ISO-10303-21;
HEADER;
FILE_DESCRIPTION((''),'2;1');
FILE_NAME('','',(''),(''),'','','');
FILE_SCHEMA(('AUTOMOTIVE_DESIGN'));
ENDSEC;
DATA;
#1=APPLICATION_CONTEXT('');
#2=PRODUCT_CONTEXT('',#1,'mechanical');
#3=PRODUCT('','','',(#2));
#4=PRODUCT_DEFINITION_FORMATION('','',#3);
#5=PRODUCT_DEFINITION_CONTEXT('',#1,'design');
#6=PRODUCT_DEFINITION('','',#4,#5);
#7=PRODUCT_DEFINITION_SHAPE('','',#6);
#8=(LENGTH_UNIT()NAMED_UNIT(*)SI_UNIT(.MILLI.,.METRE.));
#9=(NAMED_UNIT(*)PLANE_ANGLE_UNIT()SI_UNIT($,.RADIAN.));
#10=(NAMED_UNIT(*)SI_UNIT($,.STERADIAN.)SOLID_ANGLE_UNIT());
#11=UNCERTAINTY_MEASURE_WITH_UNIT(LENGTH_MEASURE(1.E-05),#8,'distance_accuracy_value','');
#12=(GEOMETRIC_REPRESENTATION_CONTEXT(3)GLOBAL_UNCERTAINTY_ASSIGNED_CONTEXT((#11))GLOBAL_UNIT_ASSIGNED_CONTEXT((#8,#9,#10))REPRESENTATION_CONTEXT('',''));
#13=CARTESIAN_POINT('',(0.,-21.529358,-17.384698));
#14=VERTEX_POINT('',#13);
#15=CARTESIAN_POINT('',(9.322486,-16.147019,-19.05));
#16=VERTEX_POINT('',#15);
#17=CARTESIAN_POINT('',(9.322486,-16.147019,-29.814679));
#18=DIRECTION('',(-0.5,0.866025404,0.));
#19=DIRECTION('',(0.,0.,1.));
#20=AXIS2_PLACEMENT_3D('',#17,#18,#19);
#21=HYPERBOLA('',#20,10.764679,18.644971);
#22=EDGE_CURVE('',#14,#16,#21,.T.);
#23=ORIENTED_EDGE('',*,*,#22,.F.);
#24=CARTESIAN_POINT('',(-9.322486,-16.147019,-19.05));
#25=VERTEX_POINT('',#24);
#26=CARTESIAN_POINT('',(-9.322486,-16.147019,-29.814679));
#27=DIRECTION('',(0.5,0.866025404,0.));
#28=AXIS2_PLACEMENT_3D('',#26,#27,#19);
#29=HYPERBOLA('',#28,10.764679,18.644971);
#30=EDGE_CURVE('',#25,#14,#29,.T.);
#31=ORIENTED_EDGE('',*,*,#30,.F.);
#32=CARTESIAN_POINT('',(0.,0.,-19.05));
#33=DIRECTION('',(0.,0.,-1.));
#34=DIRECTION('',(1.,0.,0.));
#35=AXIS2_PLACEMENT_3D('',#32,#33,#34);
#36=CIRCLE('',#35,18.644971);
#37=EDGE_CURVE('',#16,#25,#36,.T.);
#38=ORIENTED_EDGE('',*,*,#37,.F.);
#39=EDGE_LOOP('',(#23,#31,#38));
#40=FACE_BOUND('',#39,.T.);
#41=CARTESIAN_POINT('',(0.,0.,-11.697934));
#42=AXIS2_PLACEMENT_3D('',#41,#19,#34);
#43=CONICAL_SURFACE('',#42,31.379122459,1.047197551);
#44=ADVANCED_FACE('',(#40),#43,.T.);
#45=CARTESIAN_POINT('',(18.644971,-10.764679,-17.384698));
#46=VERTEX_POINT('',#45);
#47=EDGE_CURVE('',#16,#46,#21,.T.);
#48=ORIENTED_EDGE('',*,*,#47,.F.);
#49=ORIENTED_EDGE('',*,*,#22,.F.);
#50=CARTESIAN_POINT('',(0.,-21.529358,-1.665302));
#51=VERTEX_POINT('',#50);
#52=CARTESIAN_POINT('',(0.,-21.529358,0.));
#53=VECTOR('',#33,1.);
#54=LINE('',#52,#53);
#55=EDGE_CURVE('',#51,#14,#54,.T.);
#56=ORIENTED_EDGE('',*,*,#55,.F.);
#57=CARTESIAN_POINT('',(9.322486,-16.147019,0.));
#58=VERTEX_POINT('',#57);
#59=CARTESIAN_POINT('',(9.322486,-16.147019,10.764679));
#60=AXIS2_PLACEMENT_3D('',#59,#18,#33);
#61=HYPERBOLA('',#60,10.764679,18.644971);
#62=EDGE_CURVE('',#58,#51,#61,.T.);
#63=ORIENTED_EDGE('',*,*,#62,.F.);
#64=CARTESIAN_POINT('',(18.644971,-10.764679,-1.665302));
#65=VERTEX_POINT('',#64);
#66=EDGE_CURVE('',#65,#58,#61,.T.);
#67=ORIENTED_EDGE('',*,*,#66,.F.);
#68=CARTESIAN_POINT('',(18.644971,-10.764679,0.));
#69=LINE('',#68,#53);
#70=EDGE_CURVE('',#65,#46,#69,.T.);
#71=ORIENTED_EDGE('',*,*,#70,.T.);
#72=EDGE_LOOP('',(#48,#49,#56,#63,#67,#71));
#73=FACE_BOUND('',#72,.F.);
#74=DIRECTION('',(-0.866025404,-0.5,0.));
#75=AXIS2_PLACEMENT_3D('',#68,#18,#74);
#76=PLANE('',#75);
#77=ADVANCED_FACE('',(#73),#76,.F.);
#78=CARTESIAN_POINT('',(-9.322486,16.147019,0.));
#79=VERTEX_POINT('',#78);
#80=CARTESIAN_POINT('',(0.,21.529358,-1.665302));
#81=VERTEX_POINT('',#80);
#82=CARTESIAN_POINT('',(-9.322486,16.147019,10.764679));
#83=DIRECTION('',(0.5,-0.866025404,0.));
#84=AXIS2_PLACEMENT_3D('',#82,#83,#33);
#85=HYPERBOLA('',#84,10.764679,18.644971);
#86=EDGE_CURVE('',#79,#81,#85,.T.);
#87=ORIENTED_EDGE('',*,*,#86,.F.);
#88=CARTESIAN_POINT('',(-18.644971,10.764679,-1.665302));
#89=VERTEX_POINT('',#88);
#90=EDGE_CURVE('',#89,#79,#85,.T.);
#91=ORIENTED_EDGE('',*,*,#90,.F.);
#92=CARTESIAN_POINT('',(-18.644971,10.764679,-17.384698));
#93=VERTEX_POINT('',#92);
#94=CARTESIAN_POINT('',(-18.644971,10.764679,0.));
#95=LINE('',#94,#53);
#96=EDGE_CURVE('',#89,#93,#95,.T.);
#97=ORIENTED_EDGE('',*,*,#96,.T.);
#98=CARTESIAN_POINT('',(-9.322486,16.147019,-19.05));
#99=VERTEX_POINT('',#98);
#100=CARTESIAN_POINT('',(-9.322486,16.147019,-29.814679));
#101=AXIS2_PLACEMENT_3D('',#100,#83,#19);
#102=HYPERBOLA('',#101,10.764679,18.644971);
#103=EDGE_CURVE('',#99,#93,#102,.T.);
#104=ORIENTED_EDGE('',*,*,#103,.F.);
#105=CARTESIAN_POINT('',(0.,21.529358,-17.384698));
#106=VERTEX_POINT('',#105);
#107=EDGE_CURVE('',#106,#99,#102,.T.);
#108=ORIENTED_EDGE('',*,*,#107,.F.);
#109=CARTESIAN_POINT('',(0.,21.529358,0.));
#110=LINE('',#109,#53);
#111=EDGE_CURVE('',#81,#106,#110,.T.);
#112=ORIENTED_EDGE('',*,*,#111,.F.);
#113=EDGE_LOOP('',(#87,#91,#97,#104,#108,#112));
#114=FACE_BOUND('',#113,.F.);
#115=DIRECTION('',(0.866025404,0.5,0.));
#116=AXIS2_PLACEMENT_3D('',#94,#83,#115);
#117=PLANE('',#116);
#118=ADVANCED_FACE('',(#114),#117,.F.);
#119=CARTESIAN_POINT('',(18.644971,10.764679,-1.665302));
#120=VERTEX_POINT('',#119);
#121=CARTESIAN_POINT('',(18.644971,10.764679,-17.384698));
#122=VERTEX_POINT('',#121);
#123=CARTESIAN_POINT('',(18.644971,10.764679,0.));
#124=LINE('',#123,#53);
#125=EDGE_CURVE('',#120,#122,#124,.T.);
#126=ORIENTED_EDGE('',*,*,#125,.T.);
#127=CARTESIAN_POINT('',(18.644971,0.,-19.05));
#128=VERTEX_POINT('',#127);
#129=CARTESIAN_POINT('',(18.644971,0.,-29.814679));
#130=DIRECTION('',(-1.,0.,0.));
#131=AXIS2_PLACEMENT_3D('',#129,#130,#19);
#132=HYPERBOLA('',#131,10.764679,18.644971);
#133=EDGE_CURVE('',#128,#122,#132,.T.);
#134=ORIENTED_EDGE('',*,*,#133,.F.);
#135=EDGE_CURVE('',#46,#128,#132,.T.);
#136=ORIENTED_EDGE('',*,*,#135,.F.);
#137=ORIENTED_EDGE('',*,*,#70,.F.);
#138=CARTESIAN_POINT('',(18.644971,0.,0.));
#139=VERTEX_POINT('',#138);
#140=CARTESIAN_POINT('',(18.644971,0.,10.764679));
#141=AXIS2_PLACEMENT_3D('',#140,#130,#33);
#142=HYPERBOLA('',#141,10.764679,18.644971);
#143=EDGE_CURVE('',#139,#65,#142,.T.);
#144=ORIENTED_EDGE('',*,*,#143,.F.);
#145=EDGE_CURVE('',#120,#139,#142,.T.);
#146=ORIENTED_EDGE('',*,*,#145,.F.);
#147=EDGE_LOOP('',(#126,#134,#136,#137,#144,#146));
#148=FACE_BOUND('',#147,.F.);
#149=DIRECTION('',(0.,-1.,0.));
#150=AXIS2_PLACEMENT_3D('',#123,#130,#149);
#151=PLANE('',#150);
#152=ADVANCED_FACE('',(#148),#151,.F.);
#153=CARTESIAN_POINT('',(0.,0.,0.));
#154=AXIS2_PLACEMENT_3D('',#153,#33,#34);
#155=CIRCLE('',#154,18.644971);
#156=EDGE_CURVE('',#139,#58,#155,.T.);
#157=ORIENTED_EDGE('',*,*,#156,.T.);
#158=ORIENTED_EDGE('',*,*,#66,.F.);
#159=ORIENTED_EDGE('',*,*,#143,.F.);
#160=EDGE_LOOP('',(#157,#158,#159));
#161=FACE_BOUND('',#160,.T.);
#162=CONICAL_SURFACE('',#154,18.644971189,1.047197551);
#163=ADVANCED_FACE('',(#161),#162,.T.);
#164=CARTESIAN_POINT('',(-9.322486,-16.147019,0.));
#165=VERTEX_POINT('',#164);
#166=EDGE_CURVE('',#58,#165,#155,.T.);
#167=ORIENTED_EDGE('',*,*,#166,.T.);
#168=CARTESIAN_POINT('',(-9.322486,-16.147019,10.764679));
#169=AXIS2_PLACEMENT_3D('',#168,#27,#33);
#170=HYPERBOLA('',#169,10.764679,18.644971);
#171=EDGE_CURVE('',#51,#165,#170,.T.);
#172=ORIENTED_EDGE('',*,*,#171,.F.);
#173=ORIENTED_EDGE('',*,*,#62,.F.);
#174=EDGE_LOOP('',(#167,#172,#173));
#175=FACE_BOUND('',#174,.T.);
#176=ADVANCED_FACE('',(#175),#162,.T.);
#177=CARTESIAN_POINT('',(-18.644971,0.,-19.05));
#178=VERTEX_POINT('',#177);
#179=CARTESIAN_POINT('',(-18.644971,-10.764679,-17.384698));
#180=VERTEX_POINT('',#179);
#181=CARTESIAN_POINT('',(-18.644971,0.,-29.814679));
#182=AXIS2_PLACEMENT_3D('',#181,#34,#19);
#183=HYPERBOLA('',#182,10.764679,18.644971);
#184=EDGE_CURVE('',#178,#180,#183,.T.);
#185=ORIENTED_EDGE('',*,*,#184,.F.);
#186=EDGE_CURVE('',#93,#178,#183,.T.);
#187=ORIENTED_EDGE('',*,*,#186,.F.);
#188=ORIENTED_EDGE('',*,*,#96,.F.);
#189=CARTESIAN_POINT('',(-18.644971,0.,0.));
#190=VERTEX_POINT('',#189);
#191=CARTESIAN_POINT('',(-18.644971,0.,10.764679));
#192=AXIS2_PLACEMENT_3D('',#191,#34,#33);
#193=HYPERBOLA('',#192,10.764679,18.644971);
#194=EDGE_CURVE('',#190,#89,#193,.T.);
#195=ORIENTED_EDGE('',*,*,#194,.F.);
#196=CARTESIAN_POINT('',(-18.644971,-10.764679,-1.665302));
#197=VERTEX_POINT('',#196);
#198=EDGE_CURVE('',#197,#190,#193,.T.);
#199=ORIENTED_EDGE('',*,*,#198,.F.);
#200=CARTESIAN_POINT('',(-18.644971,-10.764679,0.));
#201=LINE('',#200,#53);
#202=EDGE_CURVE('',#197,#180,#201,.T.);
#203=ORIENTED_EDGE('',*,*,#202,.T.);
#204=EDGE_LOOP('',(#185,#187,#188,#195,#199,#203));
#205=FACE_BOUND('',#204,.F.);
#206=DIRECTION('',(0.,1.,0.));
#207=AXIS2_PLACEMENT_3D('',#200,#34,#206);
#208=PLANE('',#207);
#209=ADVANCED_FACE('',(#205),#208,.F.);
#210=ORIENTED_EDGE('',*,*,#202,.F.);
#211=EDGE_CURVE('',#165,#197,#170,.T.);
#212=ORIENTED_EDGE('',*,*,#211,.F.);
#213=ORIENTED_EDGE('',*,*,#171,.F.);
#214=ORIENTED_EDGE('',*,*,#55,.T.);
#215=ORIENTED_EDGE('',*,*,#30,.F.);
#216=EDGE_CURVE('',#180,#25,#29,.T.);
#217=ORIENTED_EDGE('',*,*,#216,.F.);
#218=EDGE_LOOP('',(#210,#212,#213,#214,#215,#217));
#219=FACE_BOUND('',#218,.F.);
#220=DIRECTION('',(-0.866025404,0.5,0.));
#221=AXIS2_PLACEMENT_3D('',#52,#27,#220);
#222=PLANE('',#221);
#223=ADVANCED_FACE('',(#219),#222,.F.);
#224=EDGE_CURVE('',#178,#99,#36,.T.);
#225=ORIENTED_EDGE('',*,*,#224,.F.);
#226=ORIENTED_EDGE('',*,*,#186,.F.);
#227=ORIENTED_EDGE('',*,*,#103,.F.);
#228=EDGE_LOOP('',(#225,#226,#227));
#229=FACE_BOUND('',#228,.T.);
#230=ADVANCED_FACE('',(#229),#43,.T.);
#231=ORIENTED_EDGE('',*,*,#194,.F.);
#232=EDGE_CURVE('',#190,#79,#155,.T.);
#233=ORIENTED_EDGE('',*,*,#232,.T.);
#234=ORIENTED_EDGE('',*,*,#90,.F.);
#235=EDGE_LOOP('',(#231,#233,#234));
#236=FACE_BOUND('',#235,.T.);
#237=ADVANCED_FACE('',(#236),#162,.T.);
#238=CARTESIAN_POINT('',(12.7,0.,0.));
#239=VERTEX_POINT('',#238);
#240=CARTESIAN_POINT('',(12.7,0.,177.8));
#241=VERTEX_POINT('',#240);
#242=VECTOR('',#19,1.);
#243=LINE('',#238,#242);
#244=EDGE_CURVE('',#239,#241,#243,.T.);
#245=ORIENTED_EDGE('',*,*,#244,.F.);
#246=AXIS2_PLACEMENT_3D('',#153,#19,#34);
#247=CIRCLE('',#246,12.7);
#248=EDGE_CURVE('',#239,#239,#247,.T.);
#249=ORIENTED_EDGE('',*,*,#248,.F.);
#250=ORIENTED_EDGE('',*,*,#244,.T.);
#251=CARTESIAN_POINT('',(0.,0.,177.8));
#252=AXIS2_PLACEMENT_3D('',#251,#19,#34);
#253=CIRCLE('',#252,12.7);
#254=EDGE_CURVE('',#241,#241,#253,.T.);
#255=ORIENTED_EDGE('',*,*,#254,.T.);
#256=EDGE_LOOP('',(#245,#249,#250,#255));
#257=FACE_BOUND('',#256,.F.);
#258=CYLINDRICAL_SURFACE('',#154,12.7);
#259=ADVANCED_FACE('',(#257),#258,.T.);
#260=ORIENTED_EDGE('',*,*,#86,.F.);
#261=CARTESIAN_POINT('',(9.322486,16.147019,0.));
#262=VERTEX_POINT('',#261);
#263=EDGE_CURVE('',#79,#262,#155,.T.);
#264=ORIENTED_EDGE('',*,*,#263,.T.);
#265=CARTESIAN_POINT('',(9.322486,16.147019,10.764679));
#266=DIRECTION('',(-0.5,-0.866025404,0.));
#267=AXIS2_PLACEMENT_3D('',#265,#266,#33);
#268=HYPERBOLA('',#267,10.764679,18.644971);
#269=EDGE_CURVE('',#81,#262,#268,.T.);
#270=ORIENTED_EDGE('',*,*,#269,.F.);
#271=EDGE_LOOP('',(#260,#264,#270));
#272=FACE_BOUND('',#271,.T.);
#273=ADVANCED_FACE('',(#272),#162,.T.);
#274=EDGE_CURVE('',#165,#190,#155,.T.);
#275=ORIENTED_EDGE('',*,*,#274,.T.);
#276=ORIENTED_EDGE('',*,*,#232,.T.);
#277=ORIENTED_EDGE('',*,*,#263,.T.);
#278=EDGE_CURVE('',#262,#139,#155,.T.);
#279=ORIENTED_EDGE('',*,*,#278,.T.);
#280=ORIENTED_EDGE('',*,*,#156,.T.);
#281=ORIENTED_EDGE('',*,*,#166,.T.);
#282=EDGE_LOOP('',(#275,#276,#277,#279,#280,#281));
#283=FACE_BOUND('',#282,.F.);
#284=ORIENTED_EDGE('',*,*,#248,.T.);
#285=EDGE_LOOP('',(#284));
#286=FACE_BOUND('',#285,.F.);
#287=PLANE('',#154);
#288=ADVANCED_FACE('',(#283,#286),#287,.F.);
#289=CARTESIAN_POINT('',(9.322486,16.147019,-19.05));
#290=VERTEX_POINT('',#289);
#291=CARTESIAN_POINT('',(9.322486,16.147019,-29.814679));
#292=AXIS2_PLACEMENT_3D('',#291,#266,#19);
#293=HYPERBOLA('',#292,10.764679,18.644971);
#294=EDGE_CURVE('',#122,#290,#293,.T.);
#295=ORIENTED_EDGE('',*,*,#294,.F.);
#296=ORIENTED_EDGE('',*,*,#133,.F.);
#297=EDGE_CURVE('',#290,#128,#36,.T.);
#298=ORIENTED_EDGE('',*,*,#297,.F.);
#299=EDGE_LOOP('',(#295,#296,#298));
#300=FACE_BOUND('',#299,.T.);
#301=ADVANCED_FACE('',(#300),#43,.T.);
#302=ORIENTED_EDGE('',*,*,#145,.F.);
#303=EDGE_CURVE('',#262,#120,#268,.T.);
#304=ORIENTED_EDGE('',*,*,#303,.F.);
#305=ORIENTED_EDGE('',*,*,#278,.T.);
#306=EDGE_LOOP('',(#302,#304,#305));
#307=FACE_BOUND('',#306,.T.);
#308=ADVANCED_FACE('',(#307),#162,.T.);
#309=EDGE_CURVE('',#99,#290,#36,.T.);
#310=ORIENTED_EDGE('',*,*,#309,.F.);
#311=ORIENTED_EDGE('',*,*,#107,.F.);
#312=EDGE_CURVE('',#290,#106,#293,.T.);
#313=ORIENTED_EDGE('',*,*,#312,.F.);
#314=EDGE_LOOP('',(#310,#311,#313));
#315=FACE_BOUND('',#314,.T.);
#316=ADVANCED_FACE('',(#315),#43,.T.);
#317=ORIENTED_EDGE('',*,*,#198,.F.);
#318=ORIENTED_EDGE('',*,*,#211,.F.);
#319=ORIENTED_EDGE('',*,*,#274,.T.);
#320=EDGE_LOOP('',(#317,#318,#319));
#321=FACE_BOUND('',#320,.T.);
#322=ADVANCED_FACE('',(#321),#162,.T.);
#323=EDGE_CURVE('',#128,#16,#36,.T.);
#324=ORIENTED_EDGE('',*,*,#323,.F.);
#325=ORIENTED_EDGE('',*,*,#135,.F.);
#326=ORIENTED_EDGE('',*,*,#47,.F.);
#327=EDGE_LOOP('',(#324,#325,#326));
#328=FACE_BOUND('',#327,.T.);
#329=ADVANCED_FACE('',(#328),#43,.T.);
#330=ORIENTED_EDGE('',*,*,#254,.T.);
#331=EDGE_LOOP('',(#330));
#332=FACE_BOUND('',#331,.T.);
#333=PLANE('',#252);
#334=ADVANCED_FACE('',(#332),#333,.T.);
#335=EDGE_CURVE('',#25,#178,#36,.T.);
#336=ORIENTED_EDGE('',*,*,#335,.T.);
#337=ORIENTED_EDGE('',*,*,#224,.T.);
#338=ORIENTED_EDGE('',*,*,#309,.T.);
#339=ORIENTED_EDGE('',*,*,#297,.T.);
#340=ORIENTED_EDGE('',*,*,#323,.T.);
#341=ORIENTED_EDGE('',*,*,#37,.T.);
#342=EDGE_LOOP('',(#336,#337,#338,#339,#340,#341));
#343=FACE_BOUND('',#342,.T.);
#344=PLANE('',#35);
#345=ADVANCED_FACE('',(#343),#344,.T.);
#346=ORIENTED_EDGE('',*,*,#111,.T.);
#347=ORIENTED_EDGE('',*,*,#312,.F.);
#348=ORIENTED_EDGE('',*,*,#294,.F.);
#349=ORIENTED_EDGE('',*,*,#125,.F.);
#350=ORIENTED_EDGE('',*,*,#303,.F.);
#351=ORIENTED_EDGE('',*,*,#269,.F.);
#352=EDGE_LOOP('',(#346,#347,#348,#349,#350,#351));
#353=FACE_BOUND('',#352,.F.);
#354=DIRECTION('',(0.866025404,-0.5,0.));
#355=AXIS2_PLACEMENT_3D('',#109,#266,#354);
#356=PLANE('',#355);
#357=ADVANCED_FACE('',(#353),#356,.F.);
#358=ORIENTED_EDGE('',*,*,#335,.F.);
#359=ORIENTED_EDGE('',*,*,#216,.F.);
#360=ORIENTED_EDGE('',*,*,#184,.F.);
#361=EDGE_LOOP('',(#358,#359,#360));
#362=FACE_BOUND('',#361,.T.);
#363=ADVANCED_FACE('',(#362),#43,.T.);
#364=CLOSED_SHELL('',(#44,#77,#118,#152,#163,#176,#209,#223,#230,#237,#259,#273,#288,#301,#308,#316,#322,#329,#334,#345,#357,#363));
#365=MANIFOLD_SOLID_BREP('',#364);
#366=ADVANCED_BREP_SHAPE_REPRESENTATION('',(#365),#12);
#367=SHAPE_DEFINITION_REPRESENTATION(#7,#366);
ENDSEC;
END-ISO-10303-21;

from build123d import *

# Parameters (mm, degrees)
F0_R     = 12.7
F1_DEPTH = 177.8
F2_R     = 12.7
F3_DEPTH = 19.05


with BuildPart() as f1:
    # F0 (on Top) → F1 (new body)
    with BuildSketch(Plane.XY):
        Circle(F0_R)
    extrude(amount=F1_DEPTH)

    # F2 (on face) → F3 (join)
    with BuildSketch(Plane(origin=(0, 0, 0), x_dir=(1, 0, 0), z_dir=(0, 0, -1))):
        Polygon((0, -21.5293582698), (18.6449711888, -10.7646791349), (18.6449711888, 10.7646791349), (0, 21.5293582698), (-18.6449711888, 10.7646791349), (-18.6449711888, -10.7646791349), align=None)
        Circle(F2_R, mode=Mode.SUBTRACT)
        Circle(F2_R)
    extrude(amount=F3_DEPTH)

    # F4 (on Front) → F5 (revolve, cut)
    with BuildSketch(Plane.XZ):
        Polygon((31.3791224592, -11.6979343361), (18.6449711888, -19.05), (31.3791224592, -19.05), align=None)
        Polygon((18.6449711888, 0), (31.3791224592, -7.3520656639), (31.3791224592, 0), align=None)
    revolve(axis=Axis((0, 0, -9.525), (0, 0, -1)), mode=Mode.SUBTRACT)


solid = f1.part
